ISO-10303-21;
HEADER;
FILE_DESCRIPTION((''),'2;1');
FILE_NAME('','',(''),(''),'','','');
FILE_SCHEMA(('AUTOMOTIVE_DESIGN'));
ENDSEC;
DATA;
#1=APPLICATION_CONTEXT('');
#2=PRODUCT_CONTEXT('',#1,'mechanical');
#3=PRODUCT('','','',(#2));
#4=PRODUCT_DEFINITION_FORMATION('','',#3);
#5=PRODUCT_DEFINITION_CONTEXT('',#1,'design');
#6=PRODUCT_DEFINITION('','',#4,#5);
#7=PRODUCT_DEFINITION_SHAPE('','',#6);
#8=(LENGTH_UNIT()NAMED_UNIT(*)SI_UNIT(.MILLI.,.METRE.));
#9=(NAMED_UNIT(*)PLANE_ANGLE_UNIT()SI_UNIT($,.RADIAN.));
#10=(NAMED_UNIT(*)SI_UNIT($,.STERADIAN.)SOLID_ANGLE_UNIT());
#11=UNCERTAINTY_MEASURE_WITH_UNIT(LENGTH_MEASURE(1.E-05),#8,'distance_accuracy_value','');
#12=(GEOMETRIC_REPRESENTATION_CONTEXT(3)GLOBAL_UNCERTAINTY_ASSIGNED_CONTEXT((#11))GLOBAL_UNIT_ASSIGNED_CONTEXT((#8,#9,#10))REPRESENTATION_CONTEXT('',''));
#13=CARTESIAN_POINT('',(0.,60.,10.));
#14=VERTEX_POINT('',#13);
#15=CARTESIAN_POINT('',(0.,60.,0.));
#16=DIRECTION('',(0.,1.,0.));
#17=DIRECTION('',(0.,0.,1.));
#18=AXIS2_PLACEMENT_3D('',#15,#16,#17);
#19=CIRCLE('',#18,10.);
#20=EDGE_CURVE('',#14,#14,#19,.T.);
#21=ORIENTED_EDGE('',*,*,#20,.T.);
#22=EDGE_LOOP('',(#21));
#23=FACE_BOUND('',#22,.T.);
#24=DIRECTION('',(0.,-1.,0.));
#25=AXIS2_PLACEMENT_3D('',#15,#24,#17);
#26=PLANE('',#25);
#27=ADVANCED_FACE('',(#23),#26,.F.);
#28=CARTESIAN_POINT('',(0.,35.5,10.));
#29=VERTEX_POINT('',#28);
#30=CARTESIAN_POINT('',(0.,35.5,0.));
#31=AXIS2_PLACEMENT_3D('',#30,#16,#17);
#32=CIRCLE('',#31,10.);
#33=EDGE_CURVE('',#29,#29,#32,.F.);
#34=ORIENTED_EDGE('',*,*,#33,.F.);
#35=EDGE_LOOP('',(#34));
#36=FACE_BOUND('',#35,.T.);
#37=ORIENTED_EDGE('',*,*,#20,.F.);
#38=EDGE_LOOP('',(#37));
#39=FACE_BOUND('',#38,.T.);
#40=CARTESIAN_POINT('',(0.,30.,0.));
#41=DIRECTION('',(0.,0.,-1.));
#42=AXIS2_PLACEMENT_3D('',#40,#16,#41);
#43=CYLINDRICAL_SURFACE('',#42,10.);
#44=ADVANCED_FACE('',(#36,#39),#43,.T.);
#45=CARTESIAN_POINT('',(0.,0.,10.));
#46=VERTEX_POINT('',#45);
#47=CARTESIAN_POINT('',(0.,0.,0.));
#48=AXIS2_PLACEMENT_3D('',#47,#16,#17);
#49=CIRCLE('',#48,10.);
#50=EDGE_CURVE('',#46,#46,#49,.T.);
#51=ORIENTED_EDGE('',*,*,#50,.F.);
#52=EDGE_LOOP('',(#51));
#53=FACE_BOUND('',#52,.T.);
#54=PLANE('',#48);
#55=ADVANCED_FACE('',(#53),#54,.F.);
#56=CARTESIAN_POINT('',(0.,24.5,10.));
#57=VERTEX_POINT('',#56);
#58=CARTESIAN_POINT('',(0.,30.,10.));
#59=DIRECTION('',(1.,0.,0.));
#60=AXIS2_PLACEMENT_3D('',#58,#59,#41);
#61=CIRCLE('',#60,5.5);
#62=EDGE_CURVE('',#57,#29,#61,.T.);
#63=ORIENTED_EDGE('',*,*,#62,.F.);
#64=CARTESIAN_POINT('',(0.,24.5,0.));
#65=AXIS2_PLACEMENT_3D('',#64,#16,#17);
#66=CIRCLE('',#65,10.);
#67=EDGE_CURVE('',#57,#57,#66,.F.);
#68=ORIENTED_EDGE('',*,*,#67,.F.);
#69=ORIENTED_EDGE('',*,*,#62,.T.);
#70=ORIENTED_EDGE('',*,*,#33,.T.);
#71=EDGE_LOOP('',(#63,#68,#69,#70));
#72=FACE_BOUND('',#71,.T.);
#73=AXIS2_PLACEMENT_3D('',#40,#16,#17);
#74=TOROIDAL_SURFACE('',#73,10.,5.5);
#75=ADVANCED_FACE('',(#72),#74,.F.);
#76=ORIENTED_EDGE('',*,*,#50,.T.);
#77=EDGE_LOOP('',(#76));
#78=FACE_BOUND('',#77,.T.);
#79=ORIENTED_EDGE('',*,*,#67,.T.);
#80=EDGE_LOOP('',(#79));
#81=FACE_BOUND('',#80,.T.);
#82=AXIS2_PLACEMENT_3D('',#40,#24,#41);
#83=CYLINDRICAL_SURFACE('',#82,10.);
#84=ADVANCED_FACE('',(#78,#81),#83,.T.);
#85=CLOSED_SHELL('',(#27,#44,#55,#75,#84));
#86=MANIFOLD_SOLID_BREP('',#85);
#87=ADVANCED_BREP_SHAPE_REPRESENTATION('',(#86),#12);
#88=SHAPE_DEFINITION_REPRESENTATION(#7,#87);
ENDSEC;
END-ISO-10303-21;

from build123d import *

# Parameters (mm, degrees)
SKETCH1_R           = 10
BOSS_EXTRUDE1_DEPTH = 30


# Read off the part's stored shape, not the designer's step: Cut-Sweep5
with BuildPart() as part:
    # Sketch1 → Boss-Extrude1 (new body)
    with BuildSketch(Plane(origin=(0, 0, 0), x_dir=(1, 0, 0), z_dir=(0, 1, 0))):
        with Locations(Location((0, 0, 0), (0, 0, 270))):
            Circle(SKETCH1_R)
    extrude(amount=BOSS_EXTRUDE1_DEPTH)

    # Cut-Sweep5 outline → Cut-Sweep5 (revolve, cut)
    with BuildSketch(Plane.XY):
        with BuildLine():
            Line((10, 30), (4.5, 30))
            ThreePointArc((4.5, 30), (6.110912703, 26.110912703), (10, 24.5))
            Line((10, 24.5), (10, 30))
        make_face()
    revolve(axis=Axis((0, 0, 0), (0, 1, 0)), mode=Mode.SUBTRACT)

    # Mirror1: part across plane


with BuildPart() as part_1:
    add(part.part)
    add(part.part.mirror(Plane.ZX.offset(30)))


solid = part_1.part
